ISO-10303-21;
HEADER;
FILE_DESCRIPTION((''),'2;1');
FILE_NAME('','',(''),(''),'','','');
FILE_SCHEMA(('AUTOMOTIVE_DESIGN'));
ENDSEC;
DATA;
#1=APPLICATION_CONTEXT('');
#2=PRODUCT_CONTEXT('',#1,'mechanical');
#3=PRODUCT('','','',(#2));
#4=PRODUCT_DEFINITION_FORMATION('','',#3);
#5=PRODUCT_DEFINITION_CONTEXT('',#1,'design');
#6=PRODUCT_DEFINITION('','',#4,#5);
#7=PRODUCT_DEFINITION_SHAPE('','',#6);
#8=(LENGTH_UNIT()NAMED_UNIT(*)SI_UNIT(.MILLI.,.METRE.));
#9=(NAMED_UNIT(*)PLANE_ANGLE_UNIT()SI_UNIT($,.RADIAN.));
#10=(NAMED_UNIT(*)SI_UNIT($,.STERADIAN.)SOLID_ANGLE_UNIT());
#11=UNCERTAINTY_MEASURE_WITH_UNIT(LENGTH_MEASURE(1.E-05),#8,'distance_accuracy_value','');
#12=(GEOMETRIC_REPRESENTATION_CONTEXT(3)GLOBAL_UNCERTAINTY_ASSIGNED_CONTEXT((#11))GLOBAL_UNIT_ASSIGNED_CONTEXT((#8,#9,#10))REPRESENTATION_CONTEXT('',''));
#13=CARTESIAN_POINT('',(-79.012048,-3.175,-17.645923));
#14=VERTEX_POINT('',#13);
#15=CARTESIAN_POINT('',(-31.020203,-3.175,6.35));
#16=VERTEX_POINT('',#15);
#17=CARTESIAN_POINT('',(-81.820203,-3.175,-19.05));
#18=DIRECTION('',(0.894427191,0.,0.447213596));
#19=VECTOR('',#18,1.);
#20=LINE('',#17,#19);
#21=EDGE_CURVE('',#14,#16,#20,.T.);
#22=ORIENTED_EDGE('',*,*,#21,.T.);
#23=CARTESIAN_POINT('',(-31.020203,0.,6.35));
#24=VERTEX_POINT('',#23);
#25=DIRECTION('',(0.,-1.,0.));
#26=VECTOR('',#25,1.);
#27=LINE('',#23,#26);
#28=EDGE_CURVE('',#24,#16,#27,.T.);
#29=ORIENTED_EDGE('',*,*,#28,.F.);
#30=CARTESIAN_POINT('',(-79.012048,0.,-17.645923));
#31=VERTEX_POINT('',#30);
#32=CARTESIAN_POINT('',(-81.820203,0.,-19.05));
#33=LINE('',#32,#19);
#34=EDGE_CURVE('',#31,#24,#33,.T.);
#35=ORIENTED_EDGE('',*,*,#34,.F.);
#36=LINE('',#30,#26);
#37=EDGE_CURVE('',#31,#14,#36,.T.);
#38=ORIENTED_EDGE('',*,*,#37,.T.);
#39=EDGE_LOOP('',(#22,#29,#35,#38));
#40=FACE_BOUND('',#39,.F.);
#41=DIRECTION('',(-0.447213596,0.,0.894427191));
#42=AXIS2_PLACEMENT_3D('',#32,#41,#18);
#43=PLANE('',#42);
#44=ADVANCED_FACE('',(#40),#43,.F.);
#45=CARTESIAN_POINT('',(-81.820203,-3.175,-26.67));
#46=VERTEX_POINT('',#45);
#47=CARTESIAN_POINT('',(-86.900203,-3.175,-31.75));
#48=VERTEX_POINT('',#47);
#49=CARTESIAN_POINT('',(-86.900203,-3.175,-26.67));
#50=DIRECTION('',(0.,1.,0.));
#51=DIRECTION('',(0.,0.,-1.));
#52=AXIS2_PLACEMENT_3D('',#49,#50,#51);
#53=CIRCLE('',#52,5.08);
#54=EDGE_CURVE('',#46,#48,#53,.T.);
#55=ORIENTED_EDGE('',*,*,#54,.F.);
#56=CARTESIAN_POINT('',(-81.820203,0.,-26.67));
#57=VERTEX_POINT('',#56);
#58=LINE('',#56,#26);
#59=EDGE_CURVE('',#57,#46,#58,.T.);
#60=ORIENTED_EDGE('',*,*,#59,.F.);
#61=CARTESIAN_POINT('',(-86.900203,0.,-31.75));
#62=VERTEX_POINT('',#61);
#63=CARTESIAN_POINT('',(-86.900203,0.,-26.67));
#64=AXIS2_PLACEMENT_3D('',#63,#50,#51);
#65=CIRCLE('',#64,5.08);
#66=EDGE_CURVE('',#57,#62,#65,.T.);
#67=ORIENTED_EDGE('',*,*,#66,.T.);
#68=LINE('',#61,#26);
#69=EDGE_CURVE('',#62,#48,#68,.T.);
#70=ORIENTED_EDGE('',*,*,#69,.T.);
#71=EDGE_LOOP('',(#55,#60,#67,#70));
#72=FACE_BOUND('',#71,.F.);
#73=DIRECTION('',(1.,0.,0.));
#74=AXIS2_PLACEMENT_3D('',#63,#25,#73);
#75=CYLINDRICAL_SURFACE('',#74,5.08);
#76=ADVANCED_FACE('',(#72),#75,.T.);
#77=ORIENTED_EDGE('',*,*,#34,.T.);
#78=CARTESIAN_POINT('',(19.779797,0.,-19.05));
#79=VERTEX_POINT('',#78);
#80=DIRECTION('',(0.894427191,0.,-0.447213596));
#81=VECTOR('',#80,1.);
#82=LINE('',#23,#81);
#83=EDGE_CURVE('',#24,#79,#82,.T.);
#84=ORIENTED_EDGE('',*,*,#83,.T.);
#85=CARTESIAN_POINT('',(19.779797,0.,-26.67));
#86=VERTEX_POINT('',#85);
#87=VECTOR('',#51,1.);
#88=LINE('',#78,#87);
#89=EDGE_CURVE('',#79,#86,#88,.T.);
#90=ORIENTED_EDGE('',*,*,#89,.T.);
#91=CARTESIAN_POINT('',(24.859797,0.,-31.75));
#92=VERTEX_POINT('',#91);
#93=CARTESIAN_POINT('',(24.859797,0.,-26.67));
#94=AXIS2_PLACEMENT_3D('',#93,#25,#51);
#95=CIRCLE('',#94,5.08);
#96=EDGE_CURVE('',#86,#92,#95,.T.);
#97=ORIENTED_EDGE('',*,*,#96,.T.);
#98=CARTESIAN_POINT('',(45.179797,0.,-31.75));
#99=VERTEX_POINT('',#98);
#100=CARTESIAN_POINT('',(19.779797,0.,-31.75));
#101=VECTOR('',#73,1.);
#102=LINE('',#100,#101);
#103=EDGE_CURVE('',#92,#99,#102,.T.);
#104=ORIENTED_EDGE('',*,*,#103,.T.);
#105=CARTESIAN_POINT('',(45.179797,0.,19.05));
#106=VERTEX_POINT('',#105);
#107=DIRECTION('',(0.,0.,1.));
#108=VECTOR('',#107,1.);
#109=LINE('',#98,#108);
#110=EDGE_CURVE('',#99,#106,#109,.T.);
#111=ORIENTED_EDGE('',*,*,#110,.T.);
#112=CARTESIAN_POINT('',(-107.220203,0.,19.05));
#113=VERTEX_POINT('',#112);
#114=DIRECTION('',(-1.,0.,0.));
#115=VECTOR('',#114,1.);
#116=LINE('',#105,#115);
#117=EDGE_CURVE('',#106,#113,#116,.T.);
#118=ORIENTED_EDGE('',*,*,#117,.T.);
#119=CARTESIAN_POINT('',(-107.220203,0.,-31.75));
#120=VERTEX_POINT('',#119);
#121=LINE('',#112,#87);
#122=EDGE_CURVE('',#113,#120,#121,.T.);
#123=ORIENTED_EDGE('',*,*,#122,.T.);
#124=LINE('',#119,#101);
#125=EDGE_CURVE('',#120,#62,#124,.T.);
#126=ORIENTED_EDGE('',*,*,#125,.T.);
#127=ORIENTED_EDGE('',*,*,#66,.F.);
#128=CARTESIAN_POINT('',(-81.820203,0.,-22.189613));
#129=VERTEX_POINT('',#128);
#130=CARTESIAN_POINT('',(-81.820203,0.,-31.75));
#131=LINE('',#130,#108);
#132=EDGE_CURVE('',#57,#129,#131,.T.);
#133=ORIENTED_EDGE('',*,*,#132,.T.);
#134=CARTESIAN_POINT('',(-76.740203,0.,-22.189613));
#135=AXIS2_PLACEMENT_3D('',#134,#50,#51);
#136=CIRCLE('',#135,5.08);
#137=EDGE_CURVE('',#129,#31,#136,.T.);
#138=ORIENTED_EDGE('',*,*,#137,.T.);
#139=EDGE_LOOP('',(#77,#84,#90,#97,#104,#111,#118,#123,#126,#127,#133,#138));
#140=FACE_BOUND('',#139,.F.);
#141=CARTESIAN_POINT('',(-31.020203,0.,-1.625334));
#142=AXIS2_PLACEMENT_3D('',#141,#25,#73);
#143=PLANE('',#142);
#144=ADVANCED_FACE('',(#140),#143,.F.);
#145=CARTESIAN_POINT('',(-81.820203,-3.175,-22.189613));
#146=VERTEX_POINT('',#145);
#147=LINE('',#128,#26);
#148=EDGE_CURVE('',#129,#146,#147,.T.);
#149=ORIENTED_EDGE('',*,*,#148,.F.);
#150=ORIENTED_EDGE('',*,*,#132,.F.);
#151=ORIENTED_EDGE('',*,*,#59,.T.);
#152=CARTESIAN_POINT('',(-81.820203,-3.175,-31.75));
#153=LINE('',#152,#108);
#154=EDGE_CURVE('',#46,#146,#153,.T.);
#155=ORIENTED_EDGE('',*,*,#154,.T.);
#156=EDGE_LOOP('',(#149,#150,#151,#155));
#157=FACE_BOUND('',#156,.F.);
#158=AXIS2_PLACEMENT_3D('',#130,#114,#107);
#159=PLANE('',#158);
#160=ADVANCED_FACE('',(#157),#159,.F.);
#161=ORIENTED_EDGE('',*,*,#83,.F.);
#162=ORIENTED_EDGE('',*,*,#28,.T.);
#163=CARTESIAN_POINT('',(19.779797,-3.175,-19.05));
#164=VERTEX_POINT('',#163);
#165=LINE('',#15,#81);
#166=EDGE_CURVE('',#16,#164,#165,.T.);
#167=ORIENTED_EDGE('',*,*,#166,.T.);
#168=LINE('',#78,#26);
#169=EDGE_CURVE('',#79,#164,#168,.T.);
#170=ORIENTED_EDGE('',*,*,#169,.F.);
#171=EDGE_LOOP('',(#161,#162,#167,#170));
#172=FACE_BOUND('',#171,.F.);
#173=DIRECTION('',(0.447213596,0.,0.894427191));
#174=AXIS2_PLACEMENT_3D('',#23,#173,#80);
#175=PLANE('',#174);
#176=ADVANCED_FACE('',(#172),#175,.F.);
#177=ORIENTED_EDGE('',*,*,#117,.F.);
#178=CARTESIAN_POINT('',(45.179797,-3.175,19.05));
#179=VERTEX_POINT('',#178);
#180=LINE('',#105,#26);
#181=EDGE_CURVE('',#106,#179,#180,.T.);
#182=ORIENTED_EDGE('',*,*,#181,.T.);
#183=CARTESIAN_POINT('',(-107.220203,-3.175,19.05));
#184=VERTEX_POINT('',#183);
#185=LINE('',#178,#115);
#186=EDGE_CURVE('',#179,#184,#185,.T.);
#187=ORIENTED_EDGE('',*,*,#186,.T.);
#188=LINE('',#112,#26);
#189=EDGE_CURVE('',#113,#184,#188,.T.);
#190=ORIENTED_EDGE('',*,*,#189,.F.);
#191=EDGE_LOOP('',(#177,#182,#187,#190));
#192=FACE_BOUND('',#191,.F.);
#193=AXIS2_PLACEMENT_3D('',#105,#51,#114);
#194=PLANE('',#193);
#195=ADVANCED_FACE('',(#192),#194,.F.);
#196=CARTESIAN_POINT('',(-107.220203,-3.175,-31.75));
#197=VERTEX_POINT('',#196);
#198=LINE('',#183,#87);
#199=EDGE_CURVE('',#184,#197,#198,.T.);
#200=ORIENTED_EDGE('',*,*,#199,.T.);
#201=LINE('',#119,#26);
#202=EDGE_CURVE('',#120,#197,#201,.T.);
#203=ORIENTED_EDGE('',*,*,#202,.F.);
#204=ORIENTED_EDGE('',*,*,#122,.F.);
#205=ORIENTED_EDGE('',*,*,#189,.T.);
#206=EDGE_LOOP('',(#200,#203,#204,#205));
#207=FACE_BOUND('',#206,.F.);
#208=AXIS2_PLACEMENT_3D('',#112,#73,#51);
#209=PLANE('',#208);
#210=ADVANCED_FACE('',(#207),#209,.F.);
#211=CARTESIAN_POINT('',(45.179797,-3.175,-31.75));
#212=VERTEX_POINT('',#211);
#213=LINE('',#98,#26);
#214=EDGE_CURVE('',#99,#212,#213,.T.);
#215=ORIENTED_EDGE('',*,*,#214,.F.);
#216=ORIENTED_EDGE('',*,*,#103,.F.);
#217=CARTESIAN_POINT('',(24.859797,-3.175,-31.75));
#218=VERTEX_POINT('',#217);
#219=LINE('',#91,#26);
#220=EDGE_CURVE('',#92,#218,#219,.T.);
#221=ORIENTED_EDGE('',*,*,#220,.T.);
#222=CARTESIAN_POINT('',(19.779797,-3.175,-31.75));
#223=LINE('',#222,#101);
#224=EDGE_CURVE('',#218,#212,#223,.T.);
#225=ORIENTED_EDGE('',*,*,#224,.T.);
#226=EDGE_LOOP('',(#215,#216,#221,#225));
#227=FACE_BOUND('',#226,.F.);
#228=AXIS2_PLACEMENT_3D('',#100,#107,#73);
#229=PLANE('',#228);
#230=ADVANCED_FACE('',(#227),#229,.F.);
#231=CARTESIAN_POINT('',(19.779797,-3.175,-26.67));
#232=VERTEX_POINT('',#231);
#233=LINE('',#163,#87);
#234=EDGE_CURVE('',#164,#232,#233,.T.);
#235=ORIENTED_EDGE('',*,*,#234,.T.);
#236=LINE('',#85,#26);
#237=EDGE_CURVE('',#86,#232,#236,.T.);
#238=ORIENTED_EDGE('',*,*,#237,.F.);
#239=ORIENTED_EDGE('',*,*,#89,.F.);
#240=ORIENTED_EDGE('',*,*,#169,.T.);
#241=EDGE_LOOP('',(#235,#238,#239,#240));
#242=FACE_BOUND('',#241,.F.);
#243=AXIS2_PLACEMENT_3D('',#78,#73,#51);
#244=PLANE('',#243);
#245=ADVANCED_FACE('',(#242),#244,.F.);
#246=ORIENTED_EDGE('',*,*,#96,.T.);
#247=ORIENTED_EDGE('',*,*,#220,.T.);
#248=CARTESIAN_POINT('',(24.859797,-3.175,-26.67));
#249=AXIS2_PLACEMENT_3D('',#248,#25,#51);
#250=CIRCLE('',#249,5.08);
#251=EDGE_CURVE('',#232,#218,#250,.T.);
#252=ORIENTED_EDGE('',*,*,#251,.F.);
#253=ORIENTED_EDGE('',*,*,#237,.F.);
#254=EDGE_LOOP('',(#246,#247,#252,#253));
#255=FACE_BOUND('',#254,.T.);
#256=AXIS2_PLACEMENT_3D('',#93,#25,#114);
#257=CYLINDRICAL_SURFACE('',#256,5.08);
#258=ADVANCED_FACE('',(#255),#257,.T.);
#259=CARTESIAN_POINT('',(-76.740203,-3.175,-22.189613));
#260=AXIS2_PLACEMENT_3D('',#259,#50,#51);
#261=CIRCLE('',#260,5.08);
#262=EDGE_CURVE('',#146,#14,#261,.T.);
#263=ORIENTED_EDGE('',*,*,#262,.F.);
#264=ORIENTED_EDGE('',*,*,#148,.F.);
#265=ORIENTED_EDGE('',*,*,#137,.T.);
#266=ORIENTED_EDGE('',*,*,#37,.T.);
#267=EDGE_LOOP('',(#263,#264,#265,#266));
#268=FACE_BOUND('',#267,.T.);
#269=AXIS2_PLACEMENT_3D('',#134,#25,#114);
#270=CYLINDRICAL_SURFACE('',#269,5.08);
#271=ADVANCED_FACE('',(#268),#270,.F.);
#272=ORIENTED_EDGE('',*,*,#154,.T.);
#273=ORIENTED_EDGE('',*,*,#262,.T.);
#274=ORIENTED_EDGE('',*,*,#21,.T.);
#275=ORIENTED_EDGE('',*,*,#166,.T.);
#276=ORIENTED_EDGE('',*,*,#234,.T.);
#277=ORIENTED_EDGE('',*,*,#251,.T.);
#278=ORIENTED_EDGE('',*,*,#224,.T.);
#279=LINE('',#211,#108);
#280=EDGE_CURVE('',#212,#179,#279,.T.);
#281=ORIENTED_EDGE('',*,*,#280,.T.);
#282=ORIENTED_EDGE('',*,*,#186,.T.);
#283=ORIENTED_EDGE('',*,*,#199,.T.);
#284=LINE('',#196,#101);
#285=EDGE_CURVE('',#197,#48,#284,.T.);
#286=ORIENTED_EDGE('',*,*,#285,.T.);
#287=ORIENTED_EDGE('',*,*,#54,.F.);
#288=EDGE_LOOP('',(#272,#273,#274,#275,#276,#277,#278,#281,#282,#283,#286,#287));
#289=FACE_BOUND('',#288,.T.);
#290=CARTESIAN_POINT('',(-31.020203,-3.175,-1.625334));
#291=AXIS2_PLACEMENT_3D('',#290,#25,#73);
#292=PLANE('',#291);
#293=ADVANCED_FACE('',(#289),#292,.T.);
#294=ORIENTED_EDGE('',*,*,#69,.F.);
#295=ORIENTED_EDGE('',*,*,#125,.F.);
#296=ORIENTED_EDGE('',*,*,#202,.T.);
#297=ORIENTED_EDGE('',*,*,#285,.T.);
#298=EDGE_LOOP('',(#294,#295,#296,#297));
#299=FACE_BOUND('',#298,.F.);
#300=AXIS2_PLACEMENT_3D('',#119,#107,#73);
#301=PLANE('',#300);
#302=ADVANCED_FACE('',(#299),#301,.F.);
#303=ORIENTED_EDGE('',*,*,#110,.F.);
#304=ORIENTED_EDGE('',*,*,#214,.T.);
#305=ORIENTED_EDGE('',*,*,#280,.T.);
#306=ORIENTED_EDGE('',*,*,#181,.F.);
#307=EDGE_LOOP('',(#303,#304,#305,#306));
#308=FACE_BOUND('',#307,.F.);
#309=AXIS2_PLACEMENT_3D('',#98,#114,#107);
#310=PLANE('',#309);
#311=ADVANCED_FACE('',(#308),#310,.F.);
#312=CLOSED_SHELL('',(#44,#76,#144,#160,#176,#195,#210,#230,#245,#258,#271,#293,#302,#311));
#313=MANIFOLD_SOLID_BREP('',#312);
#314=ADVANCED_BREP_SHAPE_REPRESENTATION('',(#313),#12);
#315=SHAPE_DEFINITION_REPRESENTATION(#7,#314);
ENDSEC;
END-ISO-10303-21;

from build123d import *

# Parameters (mm, degrees)
F1_DEPTH = 3.175
F2_R     = 5.08
F3_R     = 5.08


# Not quite as in the source:
# - a feature names something its author has since deleted; it is built from what else it names


with BuildPart() as f1:
    # F0 (on Front) → F1 (new body)
    with BuildSketch(Plane.XZ):
        Polygon((45.1797973156, 19.05), (-107.2202026844, 19.05), (-107.2202026844, -31.75), (-81.8202026844, -31.75), (-81.8202026844, -19.05), (-31.0202026844, 6.35), (19.7797973156, -19.05), (19.7797973156, -31.75), (45.1797973156, -31.75), (45.1797973156, -6.35), align=None)
    extrude(amount=F1_DEPTH)

    # F2
    f2_edges = [f1.edges().sort_by_distance(p)[0] for p in [
        (-81.820203, -1.5875, -19.05),
    ]]
    fillet(f2_edges, radius=F2_R)

    # F3
    f3_edges = [f1.edges().sort_by_distance(p)[0] for p in [
        (-81.820203, -1.5875, -31.75),
        (19.779797, -1.5875, -31.75),
    ]]
    fillet(f3_edges, radius=F3_R)


solid = f1.part
